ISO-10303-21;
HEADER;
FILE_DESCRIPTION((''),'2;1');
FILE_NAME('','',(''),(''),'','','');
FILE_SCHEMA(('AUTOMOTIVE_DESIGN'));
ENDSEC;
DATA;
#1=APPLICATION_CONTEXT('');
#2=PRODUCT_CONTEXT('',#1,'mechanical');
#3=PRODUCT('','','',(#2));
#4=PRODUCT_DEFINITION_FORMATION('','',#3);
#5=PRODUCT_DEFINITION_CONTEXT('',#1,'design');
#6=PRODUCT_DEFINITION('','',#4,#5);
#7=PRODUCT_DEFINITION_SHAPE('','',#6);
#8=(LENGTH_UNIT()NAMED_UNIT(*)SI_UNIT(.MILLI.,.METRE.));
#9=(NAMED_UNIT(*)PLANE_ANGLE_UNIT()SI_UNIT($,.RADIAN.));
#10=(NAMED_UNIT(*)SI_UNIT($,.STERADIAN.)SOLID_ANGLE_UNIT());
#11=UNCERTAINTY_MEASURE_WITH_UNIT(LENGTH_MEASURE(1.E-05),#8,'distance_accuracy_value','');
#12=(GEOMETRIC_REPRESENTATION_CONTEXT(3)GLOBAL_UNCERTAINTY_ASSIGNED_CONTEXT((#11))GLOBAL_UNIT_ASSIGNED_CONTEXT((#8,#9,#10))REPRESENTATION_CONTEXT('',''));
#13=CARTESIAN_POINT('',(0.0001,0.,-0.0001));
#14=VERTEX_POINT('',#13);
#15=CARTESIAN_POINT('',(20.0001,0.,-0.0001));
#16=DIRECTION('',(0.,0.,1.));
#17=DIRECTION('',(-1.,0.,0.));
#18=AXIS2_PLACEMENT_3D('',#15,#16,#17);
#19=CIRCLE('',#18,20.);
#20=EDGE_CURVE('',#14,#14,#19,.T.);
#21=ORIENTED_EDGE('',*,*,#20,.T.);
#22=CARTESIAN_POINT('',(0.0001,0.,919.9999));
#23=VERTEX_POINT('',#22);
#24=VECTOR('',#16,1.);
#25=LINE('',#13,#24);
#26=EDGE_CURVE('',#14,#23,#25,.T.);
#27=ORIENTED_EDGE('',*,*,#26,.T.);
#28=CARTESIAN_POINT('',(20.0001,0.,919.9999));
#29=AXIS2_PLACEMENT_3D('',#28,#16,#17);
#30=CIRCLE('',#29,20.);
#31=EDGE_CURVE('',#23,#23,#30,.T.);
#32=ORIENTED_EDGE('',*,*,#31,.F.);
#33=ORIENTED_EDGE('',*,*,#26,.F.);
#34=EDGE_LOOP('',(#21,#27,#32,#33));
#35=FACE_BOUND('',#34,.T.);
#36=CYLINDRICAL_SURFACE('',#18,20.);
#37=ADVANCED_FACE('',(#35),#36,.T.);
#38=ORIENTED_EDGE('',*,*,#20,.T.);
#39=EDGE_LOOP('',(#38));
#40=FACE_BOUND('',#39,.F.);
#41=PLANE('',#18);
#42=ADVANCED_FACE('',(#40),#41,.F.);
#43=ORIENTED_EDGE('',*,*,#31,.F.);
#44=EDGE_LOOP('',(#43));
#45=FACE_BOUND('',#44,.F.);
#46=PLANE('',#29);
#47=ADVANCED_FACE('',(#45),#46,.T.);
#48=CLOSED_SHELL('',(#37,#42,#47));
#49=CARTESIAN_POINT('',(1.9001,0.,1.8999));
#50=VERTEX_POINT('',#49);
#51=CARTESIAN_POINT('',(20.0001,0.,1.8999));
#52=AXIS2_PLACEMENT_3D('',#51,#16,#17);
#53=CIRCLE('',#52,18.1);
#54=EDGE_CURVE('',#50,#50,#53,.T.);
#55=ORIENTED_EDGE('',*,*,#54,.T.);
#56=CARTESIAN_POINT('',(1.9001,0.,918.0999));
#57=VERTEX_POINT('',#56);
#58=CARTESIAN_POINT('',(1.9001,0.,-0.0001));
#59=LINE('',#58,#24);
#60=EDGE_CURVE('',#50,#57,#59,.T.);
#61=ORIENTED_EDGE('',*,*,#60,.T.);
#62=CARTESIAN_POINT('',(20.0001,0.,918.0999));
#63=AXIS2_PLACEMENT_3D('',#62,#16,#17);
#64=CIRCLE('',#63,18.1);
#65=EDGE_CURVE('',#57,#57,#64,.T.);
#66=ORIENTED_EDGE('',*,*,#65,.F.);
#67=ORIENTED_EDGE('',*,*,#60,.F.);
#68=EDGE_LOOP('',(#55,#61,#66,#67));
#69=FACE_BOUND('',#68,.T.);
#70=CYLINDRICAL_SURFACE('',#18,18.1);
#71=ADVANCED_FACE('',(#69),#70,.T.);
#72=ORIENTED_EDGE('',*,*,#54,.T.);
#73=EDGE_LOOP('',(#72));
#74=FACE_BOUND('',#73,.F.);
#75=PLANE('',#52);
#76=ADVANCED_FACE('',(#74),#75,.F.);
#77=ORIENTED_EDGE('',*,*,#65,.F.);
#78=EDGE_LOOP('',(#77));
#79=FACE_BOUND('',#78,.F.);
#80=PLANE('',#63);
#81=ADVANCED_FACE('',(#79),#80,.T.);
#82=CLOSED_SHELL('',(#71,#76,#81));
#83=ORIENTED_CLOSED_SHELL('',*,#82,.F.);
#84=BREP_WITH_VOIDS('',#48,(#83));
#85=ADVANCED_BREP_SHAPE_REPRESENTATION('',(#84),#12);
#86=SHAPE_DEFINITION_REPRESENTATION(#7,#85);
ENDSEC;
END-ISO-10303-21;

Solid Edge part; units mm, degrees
sketch "Sketch1" plane through (0, 0, 0) normal (0, -1, 0) x (1, 0, 0)
  line L0 (0.0001, -0.0001) -> (20.0001, -0.0001)
  line L1 (20.0001, -0.0001) -> (20.0001, 919.9999)
  line L2 (20.0001, 919.9999) -> (0.0001, 919.9999)
  line L3 (0.0001, -0.0001) -> (0.0001, 919.9999)
revolve "RevolvedProtrusion1" add sketch "Sketch1" angle 360 about axis through (20.0001, 0, -0.0001) along (0, 0, 1)
shell "Thinwall1" thickness 1.9 removed faces 0
